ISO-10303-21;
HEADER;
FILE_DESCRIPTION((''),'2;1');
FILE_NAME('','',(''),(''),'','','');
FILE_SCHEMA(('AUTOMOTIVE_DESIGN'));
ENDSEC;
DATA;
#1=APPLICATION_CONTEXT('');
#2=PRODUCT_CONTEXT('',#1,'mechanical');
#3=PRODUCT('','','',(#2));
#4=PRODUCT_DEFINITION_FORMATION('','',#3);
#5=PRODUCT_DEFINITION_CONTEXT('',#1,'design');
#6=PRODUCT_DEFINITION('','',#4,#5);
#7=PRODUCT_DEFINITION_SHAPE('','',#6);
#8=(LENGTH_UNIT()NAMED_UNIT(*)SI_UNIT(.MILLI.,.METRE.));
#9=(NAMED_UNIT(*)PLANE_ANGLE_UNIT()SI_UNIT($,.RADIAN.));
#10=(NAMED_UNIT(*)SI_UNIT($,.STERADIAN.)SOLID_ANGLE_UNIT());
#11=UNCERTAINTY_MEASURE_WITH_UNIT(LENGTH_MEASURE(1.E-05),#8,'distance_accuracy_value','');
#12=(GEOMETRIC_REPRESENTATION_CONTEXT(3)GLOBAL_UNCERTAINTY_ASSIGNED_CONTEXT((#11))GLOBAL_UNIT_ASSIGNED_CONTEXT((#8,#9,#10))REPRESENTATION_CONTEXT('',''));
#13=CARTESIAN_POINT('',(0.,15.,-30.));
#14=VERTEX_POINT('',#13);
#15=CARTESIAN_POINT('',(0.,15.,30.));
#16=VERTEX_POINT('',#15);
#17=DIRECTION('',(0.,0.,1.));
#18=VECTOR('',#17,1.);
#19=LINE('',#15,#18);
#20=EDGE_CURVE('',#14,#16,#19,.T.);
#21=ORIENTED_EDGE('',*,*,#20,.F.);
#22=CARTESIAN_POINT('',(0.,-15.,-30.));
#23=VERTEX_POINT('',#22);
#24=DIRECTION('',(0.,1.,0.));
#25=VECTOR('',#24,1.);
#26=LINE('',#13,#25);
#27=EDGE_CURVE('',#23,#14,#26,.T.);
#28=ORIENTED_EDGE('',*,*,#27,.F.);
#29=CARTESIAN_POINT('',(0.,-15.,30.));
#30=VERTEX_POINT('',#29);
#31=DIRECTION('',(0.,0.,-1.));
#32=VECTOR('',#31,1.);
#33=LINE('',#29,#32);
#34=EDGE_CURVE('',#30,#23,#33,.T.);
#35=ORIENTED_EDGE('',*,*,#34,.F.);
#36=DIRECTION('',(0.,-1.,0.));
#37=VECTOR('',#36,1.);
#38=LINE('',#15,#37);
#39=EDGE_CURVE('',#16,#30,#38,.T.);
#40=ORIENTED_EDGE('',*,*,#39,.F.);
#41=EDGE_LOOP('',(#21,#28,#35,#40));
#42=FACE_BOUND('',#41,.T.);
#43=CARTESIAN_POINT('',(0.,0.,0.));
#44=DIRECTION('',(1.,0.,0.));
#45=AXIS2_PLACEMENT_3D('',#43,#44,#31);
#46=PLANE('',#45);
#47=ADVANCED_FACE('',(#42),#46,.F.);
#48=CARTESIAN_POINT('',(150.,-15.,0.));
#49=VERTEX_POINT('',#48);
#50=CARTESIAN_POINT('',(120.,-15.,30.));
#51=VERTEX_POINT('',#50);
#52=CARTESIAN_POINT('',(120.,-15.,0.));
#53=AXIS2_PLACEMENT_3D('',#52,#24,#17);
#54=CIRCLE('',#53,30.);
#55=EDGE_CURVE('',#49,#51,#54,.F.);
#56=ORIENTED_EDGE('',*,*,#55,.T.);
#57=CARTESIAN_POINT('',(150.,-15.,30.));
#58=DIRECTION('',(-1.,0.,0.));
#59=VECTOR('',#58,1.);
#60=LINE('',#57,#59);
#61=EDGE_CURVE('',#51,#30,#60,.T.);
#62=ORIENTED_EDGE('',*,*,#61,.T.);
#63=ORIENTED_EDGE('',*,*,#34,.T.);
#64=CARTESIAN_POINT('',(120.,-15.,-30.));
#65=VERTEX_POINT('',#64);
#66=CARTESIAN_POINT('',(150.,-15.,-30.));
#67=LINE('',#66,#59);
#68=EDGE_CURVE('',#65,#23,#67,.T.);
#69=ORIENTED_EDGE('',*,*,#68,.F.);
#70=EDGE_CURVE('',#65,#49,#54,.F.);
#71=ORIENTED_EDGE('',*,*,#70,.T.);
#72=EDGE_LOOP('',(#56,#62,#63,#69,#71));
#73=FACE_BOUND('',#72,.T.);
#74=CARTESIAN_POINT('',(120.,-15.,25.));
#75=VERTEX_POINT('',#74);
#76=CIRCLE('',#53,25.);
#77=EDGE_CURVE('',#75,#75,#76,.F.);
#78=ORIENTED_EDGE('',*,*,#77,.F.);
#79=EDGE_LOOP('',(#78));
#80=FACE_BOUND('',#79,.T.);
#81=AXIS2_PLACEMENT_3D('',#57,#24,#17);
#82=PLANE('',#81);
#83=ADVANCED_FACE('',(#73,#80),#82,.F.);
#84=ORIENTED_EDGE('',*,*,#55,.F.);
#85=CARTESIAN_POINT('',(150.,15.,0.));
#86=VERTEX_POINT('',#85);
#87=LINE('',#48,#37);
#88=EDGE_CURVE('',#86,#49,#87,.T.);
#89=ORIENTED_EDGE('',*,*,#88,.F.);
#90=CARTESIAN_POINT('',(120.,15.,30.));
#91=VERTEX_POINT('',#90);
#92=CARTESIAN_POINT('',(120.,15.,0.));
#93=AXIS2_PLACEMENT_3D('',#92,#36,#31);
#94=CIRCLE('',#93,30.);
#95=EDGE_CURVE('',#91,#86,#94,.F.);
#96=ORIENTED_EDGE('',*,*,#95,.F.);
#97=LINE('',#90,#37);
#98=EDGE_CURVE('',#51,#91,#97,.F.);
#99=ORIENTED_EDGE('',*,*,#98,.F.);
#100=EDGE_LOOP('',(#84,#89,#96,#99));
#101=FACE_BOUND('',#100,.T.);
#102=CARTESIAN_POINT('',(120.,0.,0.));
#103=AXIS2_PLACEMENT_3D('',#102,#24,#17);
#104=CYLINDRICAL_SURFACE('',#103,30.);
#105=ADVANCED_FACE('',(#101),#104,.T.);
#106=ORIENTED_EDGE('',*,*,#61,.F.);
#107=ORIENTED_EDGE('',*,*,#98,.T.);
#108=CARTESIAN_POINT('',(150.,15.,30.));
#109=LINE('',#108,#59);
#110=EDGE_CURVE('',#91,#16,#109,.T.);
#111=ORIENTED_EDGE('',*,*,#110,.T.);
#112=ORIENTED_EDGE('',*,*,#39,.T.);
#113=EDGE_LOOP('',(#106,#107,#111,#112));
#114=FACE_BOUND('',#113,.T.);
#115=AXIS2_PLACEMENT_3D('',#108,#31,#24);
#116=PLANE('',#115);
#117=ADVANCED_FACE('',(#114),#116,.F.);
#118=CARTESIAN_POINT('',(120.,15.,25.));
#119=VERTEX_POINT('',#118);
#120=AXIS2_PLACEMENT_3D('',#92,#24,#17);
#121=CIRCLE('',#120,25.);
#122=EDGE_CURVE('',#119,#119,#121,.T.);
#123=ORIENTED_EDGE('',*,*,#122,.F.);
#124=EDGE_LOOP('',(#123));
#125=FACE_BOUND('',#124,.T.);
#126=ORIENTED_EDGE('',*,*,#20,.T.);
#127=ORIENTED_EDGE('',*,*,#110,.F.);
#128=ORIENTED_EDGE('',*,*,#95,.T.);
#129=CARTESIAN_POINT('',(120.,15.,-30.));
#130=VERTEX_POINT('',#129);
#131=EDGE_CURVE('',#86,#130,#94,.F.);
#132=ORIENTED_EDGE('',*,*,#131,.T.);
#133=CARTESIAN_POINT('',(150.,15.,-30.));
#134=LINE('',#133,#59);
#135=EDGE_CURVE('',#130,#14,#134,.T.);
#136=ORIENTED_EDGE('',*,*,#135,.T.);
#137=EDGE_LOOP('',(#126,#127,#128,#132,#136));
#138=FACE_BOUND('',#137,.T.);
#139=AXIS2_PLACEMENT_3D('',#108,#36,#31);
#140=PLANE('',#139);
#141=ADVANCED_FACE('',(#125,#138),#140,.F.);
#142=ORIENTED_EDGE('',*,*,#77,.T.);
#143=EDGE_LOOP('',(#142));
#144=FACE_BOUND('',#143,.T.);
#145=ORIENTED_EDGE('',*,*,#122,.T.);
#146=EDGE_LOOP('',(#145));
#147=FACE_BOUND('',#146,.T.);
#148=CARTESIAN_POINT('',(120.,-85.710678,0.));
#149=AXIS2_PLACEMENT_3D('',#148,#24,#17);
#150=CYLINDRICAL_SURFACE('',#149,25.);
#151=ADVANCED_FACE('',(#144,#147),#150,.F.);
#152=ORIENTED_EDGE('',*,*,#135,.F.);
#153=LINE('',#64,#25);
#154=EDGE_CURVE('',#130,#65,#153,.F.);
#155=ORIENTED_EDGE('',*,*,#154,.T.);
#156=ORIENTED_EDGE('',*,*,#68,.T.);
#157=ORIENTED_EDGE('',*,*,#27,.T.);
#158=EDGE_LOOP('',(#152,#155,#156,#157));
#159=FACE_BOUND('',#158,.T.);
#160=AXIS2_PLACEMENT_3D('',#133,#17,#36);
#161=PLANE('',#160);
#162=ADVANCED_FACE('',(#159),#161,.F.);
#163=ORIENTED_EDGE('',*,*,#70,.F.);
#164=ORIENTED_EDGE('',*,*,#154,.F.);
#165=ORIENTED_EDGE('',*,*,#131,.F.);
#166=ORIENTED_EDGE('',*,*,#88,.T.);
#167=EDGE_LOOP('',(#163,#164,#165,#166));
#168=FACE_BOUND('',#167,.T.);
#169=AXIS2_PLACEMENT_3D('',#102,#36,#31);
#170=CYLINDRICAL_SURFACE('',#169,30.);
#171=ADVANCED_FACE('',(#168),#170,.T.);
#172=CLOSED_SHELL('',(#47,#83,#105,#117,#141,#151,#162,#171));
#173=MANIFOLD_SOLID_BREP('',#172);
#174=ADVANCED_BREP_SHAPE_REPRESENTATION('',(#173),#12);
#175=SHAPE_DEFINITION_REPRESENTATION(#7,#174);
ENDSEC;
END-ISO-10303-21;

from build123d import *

# Parameters (mm, degrees)
SKETCH1_W           = 60
SKETCH1_H           = 30
BOSS_EXTRUDE1_DEPTH = 150
SKETCH2_R           = 25
CUT_EXTRUDE1_DEPTH  = 30
FILLET1_R           = 30


with BuildPart() as part:
    # Sketch1 → Boss-Extrude1 (new body)
    with BuildSketch(Plane(origin=(0, 0, 0), x_dir=(0, 0, -1), z_dir=(1, 0, 0))):
        Rectangle(SKETCH1_W, SKETCH1_H)
    extrude(amount=BOSS_EXTRUDE1_DEPTH)

    # Sketch2 → Cut-Extrude1 (cut)
    with BuildSketch(Plane(origin=(0, 15, 0), x_dir=(1, 0, 0), z_dir=(0, 1, 0))):
        with Locations(Location((120, 0, 0), (0, 0, 270))):
            Circle(SKETCH2_R)
    extrude(amount=-CUT_EXTRUDE1_DEPTH, mode=Mode.SUBTRACT)

    # Fillet1
    fillet1_edges = [part.edges().sort_by_distance(p)[0] for p in [
        (150, 0, -30),
        (150, 0, 30),
    ]]
    fillet(fillet1_edges, radius=FILLET1_R - 0.0001)  # a hair under: the kernel refuses the full size


solid = part.part
